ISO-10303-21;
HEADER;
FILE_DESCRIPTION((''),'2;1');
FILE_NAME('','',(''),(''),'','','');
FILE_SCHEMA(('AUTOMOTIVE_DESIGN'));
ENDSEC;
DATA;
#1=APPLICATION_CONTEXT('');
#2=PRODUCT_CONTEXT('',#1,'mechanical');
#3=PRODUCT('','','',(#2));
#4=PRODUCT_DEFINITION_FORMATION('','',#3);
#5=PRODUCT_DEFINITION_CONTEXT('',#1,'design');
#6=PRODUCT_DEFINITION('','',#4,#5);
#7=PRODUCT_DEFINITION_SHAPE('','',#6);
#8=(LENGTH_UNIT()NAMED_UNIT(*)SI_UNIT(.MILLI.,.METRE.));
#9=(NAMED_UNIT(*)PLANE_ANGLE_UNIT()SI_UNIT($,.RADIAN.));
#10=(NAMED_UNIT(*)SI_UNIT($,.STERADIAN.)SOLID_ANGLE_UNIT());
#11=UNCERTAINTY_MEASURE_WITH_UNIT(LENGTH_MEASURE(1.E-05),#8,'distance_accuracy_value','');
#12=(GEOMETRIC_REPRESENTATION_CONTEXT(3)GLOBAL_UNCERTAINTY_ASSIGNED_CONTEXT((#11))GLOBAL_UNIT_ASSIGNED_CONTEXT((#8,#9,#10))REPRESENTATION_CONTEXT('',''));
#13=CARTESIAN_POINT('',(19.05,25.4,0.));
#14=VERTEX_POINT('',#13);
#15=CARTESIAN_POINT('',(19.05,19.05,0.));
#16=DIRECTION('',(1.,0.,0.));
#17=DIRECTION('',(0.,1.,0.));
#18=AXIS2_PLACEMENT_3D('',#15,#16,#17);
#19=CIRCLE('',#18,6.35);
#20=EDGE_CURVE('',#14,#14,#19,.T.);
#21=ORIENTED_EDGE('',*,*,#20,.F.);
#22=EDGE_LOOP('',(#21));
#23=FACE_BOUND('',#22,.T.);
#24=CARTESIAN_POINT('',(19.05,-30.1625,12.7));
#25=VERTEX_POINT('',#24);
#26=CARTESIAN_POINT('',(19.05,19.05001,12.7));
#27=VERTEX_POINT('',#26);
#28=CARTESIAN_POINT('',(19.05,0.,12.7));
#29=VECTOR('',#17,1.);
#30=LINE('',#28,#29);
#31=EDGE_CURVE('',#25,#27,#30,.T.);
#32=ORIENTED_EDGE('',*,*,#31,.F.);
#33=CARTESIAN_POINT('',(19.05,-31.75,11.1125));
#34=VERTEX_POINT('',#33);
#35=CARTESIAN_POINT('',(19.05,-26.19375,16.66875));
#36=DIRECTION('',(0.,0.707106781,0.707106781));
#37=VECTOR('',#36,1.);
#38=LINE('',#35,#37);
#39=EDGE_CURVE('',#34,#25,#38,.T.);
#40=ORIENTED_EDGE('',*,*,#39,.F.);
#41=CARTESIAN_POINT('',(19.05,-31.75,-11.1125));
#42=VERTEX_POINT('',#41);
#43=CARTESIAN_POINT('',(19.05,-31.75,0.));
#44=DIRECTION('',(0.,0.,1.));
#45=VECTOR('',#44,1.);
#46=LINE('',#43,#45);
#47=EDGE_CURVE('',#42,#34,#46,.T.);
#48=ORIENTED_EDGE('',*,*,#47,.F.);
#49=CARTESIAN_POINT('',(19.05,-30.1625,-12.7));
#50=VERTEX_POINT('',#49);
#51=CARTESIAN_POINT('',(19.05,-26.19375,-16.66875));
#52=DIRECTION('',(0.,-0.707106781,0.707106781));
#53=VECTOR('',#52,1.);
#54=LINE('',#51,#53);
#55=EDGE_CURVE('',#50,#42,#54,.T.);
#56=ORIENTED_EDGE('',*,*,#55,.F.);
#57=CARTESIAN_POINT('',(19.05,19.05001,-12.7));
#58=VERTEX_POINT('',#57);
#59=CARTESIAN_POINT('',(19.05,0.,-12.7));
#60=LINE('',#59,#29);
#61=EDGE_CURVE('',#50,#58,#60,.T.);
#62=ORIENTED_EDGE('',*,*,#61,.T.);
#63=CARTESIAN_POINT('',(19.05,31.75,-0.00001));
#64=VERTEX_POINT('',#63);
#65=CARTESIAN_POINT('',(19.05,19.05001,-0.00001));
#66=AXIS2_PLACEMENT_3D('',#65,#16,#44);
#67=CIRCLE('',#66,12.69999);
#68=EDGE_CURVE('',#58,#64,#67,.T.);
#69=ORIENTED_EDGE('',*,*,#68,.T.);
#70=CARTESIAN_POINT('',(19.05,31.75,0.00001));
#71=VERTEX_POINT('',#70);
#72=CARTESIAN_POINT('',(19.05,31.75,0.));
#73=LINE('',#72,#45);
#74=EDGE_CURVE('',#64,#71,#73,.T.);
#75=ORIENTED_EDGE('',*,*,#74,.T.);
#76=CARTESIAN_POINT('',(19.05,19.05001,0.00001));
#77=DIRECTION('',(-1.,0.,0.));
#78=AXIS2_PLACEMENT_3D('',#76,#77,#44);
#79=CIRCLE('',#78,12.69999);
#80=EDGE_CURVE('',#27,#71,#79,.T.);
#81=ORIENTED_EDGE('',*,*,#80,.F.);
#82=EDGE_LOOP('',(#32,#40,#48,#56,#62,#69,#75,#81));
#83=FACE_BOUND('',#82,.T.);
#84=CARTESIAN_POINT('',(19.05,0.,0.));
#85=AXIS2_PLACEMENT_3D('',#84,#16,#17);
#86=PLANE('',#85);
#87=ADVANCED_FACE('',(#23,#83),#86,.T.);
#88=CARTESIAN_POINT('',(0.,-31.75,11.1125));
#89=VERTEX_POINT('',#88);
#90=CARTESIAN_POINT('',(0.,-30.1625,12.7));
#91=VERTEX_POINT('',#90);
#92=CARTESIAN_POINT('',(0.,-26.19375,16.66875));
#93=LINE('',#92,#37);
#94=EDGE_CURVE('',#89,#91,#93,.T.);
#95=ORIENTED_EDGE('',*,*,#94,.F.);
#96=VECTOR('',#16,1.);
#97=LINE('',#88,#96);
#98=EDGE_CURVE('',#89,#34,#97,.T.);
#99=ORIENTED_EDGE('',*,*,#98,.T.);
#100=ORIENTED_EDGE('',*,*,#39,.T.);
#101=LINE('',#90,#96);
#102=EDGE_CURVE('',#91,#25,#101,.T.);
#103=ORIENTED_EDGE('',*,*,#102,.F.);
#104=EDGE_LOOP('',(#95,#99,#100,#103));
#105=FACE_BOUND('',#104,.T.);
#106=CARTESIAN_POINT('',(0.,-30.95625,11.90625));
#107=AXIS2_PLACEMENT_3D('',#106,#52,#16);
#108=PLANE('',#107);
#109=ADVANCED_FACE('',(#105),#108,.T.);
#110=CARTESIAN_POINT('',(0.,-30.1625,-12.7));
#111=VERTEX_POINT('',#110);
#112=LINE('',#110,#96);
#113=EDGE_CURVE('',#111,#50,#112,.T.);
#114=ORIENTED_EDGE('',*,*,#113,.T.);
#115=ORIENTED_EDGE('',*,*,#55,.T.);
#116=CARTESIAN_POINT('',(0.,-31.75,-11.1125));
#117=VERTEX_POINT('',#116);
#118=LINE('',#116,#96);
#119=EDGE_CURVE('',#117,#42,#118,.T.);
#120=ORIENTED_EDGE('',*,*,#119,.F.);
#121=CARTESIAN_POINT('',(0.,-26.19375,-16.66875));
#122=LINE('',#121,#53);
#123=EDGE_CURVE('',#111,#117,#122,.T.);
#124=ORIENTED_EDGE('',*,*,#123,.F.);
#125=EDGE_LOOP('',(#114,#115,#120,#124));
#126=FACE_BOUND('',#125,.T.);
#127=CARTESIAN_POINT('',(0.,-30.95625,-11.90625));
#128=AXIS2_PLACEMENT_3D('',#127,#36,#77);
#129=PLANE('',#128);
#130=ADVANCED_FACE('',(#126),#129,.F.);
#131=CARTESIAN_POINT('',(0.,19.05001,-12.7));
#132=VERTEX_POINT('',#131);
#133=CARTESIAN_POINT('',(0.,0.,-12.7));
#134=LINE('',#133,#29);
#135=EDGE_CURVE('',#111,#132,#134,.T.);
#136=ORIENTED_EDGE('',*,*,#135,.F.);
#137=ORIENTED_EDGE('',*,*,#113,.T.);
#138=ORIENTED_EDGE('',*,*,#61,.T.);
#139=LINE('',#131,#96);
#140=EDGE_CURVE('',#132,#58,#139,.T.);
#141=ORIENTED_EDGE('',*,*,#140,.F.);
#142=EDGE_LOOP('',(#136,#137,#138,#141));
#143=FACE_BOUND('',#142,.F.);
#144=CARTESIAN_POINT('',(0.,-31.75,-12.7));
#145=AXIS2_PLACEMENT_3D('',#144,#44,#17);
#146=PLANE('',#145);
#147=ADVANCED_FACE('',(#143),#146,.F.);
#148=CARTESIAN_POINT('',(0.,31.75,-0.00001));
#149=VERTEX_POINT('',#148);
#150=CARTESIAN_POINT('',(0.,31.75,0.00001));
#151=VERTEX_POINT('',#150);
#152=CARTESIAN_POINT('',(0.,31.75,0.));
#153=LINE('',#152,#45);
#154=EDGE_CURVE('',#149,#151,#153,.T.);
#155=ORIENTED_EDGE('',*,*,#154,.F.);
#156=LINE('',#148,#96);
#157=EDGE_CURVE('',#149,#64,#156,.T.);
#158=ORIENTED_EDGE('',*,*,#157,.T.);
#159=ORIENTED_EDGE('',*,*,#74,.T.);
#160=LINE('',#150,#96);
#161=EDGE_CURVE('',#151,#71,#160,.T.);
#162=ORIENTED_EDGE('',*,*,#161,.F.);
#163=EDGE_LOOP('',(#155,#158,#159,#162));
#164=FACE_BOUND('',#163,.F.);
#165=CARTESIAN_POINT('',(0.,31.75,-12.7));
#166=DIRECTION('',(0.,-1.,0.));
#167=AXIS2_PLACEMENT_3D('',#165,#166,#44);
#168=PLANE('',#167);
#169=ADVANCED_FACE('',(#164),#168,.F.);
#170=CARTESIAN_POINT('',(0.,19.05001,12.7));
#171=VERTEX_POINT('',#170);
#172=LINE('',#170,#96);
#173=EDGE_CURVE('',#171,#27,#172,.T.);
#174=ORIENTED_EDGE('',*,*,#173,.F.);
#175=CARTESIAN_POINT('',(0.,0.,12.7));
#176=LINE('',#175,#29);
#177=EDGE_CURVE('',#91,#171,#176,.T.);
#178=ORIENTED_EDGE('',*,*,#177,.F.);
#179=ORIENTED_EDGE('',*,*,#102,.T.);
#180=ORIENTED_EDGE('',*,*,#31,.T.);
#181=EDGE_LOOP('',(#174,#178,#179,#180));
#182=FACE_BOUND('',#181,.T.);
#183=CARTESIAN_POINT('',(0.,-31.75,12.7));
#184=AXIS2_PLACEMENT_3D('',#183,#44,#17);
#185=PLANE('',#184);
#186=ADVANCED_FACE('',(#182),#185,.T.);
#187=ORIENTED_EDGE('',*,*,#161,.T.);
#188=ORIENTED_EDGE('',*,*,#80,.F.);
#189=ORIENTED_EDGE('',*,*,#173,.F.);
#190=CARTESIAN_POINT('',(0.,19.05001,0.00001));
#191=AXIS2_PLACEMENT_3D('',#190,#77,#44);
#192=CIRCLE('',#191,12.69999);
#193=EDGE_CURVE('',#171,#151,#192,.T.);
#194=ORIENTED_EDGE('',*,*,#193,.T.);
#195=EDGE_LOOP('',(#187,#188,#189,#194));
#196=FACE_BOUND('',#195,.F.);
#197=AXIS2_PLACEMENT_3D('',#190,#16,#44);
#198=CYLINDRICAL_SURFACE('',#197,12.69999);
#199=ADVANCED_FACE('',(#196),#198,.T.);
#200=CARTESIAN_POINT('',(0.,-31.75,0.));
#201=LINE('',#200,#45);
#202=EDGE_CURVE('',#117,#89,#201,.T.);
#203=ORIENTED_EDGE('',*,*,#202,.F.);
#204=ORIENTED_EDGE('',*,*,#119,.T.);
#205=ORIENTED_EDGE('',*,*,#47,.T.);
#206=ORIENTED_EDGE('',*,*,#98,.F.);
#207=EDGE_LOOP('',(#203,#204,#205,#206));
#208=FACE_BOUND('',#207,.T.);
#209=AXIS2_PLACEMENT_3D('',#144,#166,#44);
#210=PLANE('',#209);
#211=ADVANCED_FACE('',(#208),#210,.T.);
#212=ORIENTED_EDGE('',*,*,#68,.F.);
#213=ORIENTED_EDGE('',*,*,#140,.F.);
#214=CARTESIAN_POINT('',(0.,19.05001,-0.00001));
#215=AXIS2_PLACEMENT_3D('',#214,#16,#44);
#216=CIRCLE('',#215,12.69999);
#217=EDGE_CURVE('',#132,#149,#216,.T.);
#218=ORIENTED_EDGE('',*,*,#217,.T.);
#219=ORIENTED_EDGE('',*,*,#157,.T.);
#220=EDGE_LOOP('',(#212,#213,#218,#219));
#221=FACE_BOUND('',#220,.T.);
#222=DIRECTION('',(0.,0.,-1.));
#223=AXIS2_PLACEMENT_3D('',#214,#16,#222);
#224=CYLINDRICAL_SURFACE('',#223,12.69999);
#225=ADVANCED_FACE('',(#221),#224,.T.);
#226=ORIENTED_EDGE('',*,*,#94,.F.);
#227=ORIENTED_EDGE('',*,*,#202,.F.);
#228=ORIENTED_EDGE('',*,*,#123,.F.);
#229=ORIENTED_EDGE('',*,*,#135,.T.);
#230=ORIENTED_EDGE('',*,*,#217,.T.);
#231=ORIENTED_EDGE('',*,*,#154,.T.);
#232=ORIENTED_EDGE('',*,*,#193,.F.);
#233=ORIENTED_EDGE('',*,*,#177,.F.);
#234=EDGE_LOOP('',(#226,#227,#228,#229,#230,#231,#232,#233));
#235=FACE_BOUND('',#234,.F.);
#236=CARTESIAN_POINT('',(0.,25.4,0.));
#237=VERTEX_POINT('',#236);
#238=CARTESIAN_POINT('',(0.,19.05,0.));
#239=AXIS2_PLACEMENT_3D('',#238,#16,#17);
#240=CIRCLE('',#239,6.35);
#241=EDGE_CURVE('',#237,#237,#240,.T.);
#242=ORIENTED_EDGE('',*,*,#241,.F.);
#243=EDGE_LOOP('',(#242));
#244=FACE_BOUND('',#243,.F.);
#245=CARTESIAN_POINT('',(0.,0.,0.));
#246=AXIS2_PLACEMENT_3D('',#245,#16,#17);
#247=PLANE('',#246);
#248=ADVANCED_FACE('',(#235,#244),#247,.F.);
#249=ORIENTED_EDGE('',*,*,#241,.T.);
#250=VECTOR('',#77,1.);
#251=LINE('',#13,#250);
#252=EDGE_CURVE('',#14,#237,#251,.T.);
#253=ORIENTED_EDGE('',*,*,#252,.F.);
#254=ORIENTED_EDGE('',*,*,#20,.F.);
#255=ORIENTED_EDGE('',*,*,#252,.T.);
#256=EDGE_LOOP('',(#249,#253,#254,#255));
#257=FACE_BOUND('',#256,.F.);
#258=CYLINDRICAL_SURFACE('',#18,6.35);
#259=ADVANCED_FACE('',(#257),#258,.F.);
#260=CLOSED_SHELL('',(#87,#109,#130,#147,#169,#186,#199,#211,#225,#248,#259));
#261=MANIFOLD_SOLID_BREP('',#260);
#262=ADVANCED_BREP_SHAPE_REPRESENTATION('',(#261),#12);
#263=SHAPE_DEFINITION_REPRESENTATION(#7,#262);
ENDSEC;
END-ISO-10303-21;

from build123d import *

# Parameters (mm, degrees)
F0_W     = 63.5
F0_H     = 25.4
F1_DEPTH = 19.05
F2_R     = 6.35
F3_DEPTH = 25.4
F4_R     = 12.69999
F5_SIZE  = 1.5875


# Not quite as in the source:
# - a fillet or chamfer is up to 0.001 mm smaller than in the source, because OpenCascade refuses the exact size


with BuildPart() as f1:
    # F0 (on Right) → F1 (new body)
    with BuildSketch(Plane.YZ):
        Rectangle(F0_W, F0_H)
    extrude(amount=F1_DEPTH)

    # F2 (on face) → F3 (cut)
    with BuildSketch(Plane.YZ.offset(19.05)):
        with Locations((19.05, 0)):
            Circle(F2_R)
    extrude(amount=-F3_DEPTH, mode=Mode.SUBTRACT)

    # F4 (radius 12.7 in the source; OpenCascade refuses exactly that, so slightly less here)
    f4_edges = [f1.edges().sort_by_distance(p)[0] for p in [
        (9.525, 31.75, 12.7),
        (9.525, 31.75, -12.7),
    ]]
    fillet(f4_edges, radius=F4_R)

    # F5
    f5_edges = [f1.edges().sort_by_distance(p)[0] for p in [
        (9.525, -31.75, 12.7),
        (9.525, -31.75, -12.7),
    ]]
    chamfer(f5_edges, length=F5_SIZE)


solid = f1.part
